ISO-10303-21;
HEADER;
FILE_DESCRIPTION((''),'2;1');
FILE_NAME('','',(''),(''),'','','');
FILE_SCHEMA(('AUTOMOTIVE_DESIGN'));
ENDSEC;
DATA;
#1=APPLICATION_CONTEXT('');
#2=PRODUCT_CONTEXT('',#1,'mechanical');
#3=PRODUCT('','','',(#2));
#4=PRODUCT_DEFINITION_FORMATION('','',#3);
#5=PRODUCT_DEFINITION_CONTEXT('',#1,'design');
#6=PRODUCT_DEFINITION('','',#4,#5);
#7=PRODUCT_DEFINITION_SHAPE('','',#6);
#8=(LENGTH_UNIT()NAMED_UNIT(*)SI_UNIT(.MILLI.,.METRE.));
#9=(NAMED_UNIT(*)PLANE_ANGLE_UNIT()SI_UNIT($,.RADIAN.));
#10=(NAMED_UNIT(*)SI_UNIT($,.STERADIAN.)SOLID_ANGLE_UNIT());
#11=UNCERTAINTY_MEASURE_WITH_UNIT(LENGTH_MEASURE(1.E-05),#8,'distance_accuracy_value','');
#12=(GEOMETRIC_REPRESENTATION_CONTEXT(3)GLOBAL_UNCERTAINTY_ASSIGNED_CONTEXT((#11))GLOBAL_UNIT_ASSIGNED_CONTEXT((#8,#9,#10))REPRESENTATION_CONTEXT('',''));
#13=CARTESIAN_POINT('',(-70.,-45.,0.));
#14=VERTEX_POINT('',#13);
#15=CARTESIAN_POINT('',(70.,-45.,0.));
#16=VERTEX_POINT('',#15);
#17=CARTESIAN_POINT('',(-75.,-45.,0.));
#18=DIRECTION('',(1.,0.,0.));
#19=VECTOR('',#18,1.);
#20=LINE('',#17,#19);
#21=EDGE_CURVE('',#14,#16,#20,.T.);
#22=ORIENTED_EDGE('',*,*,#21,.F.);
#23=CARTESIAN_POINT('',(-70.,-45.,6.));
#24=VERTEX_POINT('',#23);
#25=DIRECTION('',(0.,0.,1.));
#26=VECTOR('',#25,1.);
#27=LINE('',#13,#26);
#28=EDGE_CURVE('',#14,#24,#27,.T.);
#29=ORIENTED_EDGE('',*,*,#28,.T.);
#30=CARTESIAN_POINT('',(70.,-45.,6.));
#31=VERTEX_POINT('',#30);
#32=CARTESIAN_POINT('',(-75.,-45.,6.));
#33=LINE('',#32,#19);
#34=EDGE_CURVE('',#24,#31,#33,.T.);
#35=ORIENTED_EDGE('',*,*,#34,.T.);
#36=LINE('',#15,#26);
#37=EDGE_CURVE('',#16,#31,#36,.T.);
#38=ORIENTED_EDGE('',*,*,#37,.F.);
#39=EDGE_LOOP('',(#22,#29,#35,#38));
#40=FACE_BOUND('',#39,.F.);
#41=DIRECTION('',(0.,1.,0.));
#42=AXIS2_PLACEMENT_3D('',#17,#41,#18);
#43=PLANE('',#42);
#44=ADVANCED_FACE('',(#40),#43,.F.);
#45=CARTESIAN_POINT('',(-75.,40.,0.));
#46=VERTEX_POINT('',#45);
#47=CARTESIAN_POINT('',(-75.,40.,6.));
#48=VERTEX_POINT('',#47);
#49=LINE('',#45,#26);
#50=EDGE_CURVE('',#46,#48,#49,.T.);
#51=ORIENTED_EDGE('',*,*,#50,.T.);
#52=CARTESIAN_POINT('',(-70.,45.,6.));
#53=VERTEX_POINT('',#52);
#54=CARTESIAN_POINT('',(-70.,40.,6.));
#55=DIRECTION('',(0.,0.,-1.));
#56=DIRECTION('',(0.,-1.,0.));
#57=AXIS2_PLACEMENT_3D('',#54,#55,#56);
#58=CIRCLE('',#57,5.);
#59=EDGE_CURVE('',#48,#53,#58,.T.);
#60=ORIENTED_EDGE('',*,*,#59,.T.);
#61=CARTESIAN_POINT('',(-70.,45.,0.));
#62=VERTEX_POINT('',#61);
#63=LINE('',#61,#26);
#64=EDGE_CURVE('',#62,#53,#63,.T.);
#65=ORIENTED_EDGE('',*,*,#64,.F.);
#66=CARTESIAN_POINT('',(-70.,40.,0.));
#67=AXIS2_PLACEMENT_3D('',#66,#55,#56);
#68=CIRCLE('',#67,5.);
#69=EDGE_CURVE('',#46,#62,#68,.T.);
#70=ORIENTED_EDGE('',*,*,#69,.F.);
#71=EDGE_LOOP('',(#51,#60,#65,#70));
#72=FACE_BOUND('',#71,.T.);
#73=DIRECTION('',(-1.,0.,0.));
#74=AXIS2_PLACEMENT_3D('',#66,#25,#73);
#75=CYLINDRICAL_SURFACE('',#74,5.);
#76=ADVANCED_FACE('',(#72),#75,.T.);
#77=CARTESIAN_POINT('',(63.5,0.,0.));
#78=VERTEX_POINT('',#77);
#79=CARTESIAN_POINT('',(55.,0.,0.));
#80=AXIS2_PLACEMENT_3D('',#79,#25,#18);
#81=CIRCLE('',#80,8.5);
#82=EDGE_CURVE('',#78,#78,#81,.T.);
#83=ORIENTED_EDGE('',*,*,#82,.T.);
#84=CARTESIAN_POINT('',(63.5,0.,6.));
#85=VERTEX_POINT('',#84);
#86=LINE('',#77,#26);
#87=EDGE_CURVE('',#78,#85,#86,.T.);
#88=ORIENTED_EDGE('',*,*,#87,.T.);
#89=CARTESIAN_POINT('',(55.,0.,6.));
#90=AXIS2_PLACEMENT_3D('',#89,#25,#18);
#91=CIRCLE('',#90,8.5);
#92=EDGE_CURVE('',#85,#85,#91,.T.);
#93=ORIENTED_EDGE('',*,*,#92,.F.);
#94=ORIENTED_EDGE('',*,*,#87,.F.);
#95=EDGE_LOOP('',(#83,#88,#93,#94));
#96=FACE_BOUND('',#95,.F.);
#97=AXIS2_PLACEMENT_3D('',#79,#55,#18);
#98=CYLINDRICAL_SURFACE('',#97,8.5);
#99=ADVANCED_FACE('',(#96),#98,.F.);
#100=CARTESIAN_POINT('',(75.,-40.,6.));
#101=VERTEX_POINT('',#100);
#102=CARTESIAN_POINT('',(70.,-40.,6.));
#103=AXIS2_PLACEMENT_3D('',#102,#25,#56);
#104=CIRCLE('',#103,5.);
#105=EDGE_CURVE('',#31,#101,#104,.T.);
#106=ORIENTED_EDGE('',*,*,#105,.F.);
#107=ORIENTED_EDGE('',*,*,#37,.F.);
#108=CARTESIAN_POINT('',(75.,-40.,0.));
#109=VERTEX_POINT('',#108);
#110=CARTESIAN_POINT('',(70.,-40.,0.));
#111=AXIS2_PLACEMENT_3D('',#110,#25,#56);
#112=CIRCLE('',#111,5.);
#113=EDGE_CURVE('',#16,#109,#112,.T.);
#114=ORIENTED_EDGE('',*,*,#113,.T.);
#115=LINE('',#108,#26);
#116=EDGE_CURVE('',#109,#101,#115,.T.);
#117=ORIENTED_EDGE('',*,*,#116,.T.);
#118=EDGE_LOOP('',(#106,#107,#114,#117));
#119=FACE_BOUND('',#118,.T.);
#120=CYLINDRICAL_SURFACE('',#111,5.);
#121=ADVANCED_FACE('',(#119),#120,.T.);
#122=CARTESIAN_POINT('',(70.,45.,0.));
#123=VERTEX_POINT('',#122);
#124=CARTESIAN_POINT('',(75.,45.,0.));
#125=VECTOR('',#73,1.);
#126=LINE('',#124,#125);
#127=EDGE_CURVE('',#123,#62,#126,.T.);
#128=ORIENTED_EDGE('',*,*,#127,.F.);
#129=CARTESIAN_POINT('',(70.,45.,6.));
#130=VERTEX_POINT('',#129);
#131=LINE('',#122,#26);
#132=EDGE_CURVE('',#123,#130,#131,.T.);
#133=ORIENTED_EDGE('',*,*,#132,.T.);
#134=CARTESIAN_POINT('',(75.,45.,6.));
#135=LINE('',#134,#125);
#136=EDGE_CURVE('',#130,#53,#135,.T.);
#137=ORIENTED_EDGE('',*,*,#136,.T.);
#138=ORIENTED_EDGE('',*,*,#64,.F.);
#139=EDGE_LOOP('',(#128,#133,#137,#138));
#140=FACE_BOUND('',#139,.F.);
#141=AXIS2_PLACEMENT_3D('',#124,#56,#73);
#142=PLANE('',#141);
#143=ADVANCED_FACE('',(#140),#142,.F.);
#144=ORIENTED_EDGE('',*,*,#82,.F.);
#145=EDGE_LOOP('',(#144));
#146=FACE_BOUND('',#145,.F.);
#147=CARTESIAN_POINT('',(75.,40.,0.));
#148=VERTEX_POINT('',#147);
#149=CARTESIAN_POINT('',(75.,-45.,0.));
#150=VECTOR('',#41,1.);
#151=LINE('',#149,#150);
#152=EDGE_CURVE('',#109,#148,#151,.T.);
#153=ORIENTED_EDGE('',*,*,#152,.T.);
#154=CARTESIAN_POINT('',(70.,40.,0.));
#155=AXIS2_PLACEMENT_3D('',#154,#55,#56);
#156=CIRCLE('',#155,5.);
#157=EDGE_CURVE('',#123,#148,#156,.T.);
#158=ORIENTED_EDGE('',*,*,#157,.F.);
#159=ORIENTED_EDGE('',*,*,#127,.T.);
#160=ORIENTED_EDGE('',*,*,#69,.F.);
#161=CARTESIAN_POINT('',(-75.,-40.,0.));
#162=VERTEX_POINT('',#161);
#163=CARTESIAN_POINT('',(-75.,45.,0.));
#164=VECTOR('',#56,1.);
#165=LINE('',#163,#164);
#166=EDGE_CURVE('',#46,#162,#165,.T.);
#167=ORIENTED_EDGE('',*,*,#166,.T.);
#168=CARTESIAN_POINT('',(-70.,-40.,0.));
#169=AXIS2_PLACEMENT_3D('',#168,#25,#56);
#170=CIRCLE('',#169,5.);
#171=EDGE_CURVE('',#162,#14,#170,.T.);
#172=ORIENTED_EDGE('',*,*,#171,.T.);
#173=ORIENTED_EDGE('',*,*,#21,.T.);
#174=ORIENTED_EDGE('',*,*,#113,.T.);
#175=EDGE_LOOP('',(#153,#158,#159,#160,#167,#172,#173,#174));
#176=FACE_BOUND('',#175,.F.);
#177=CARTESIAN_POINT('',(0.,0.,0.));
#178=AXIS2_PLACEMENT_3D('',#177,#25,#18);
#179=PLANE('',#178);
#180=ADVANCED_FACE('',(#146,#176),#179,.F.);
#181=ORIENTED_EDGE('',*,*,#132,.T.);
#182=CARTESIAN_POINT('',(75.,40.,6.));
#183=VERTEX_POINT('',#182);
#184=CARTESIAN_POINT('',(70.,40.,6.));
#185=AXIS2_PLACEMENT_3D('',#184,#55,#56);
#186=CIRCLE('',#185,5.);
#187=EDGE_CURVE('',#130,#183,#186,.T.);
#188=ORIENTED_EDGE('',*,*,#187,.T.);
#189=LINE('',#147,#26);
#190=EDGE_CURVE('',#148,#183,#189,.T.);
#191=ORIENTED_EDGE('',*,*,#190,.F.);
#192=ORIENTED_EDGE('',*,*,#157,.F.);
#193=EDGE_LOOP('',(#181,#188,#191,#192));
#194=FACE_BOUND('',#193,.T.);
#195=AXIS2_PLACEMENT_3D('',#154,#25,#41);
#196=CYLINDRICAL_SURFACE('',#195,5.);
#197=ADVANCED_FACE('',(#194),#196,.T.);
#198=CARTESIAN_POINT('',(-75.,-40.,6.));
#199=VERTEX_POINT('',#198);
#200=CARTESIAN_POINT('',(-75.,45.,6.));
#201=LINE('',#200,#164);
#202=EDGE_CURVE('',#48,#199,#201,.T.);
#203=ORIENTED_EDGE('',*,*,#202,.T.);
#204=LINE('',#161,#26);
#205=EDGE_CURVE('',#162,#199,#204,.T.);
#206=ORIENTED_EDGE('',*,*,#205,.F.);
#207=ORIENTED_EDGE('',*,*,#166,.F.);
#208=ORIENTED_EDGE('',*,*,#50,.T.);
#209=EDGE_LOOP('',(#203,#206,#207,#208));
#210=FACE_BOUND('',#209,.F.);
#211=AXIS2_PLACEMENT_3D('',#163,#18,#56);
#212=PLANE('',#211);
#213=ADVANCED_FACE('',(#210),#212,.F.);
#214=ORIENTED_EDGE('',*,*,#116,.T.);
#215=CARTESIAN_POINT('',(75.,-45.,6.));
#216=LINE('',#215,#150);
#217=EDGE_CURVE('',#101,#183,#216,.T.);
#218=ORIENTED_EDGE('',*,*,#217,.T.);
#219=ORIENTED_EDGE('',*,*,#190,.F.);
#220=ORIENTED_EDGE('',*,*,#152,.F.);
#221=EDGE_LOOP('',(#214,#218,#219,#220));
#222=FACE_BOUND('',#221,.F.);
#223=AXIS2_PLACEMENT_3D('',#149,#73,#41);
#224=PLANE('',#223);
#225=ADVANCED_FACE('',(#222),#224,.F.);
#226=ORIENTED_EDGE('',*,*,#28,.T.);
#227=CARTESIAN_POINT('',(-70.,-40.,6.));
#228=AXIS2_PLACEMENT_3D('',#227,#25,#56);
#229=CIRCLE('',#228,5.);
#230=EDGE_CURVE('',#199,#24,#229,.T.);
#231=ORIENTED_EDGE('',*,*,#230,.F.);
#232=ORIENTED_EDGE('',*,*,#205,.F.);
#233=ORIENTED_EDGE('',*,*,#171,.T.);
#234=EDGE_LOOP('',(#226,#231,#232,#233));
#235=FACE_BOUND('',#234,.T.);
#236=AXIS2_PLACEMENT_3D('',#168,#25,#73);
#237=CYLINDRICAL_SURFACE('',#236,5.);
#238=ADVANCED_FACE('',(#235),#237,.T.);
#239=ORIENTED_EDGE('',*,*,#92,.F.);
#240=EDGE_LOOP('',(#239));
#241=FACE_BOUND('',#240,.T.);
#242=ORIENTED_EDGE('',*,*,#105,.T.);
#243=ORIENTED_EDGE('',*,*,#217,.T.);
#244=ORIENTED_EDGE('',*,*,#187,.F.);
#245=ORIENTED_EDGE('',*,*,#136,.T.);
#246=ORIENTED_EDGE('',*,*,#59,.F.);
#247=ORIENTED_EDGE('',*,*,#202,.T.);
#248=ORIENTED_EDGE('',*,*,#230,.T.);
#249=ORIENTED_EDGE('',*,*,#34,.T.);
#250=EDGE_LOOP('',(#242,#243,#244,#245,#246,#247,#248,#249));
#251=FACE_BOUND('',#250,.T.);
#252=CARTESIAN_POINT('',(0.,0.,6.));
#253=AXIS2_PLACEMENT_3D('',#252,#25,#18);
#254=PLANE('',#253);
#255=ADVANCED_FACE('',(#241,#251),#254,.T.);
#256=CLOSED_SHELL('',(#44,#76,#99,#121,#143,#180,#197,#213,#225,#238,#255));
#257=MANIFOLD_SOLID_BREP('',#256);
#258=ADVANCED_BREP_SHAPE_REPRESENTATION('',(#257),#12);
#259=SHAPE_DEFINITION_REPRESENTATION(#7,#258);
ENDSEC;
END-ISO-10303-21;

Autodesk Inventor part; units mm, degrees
ref_plane "YZ Plane" through (0, 0, 0) normal (1, 0, 0) x (0, 1, 0)
ref_plane "XZ Plane" through (0, 0, 0) normal (0, 1, 0) x (-1, 0, 0)
ref_plane "XY Plane" through (0, 0, 0) normal (0, 0, 1) x (1, 0, 0)
sketch "Sketch1" plane through (0, 0, 0) normal (0, 0, 1) x (1, 0, 0)
  line L0 (-75, -45) -> (75, -45)
  line L1 (75, -45) -> (75, 45)
  line L2 (75, 45) -> (-75, 45)
  line L3 (-75, 45) -> (-75, -45)
  line L4 (-75, -45) -> (75, 45) construction
  line L5 (75, -45) -> (-75, 45) construction
  circle A0 centre (55, -25) radius 8.5
  circle A1 centre (55, 25) radius 8.5
  line L6 (0, 0) -> (75, 0) construction
  circle A2 centre (55, 0) radius 8.5
  dimension "d0" = 150
  dimension "d1" = 90
  dimension "d23" = 17
  dimension "d25" = 20
  dimension "d26" = 20
extrude "Plate1" add sketch "Sketch1" along normal blind 6 contours L3 L2 L1 L0 | A0 | A1
fillet "Corner Round2" radius 5 4 edges at (-75, 45, 3) (-75, -45, 3) (75, -45, 3) (75, 45, 3)
equation "\"d26\" = d25"
equation "\"d2\" = Thickness"
equation "\"BendReliefWidth\" = Thickness"
equation "\"BendReliefDepth\" = 0.5 * Thickness"
equation "\"CornerReliefSize\" = 4 * Thickness"
equation "\"MinimumRemnant\" = 2 * Thickness"
equation "\"TransitionRadius\" = BendRadius"
equation "\"JacobiRadiusSize\" = BendRadius"
equation "\"GapSize\" = Thickness"
equation "\"Thickness\" = 6"
equation "\"BendRadius\" = 5"
properties part number "PNS 1695 leg floor plate_1200" material "Stainless Steel"
